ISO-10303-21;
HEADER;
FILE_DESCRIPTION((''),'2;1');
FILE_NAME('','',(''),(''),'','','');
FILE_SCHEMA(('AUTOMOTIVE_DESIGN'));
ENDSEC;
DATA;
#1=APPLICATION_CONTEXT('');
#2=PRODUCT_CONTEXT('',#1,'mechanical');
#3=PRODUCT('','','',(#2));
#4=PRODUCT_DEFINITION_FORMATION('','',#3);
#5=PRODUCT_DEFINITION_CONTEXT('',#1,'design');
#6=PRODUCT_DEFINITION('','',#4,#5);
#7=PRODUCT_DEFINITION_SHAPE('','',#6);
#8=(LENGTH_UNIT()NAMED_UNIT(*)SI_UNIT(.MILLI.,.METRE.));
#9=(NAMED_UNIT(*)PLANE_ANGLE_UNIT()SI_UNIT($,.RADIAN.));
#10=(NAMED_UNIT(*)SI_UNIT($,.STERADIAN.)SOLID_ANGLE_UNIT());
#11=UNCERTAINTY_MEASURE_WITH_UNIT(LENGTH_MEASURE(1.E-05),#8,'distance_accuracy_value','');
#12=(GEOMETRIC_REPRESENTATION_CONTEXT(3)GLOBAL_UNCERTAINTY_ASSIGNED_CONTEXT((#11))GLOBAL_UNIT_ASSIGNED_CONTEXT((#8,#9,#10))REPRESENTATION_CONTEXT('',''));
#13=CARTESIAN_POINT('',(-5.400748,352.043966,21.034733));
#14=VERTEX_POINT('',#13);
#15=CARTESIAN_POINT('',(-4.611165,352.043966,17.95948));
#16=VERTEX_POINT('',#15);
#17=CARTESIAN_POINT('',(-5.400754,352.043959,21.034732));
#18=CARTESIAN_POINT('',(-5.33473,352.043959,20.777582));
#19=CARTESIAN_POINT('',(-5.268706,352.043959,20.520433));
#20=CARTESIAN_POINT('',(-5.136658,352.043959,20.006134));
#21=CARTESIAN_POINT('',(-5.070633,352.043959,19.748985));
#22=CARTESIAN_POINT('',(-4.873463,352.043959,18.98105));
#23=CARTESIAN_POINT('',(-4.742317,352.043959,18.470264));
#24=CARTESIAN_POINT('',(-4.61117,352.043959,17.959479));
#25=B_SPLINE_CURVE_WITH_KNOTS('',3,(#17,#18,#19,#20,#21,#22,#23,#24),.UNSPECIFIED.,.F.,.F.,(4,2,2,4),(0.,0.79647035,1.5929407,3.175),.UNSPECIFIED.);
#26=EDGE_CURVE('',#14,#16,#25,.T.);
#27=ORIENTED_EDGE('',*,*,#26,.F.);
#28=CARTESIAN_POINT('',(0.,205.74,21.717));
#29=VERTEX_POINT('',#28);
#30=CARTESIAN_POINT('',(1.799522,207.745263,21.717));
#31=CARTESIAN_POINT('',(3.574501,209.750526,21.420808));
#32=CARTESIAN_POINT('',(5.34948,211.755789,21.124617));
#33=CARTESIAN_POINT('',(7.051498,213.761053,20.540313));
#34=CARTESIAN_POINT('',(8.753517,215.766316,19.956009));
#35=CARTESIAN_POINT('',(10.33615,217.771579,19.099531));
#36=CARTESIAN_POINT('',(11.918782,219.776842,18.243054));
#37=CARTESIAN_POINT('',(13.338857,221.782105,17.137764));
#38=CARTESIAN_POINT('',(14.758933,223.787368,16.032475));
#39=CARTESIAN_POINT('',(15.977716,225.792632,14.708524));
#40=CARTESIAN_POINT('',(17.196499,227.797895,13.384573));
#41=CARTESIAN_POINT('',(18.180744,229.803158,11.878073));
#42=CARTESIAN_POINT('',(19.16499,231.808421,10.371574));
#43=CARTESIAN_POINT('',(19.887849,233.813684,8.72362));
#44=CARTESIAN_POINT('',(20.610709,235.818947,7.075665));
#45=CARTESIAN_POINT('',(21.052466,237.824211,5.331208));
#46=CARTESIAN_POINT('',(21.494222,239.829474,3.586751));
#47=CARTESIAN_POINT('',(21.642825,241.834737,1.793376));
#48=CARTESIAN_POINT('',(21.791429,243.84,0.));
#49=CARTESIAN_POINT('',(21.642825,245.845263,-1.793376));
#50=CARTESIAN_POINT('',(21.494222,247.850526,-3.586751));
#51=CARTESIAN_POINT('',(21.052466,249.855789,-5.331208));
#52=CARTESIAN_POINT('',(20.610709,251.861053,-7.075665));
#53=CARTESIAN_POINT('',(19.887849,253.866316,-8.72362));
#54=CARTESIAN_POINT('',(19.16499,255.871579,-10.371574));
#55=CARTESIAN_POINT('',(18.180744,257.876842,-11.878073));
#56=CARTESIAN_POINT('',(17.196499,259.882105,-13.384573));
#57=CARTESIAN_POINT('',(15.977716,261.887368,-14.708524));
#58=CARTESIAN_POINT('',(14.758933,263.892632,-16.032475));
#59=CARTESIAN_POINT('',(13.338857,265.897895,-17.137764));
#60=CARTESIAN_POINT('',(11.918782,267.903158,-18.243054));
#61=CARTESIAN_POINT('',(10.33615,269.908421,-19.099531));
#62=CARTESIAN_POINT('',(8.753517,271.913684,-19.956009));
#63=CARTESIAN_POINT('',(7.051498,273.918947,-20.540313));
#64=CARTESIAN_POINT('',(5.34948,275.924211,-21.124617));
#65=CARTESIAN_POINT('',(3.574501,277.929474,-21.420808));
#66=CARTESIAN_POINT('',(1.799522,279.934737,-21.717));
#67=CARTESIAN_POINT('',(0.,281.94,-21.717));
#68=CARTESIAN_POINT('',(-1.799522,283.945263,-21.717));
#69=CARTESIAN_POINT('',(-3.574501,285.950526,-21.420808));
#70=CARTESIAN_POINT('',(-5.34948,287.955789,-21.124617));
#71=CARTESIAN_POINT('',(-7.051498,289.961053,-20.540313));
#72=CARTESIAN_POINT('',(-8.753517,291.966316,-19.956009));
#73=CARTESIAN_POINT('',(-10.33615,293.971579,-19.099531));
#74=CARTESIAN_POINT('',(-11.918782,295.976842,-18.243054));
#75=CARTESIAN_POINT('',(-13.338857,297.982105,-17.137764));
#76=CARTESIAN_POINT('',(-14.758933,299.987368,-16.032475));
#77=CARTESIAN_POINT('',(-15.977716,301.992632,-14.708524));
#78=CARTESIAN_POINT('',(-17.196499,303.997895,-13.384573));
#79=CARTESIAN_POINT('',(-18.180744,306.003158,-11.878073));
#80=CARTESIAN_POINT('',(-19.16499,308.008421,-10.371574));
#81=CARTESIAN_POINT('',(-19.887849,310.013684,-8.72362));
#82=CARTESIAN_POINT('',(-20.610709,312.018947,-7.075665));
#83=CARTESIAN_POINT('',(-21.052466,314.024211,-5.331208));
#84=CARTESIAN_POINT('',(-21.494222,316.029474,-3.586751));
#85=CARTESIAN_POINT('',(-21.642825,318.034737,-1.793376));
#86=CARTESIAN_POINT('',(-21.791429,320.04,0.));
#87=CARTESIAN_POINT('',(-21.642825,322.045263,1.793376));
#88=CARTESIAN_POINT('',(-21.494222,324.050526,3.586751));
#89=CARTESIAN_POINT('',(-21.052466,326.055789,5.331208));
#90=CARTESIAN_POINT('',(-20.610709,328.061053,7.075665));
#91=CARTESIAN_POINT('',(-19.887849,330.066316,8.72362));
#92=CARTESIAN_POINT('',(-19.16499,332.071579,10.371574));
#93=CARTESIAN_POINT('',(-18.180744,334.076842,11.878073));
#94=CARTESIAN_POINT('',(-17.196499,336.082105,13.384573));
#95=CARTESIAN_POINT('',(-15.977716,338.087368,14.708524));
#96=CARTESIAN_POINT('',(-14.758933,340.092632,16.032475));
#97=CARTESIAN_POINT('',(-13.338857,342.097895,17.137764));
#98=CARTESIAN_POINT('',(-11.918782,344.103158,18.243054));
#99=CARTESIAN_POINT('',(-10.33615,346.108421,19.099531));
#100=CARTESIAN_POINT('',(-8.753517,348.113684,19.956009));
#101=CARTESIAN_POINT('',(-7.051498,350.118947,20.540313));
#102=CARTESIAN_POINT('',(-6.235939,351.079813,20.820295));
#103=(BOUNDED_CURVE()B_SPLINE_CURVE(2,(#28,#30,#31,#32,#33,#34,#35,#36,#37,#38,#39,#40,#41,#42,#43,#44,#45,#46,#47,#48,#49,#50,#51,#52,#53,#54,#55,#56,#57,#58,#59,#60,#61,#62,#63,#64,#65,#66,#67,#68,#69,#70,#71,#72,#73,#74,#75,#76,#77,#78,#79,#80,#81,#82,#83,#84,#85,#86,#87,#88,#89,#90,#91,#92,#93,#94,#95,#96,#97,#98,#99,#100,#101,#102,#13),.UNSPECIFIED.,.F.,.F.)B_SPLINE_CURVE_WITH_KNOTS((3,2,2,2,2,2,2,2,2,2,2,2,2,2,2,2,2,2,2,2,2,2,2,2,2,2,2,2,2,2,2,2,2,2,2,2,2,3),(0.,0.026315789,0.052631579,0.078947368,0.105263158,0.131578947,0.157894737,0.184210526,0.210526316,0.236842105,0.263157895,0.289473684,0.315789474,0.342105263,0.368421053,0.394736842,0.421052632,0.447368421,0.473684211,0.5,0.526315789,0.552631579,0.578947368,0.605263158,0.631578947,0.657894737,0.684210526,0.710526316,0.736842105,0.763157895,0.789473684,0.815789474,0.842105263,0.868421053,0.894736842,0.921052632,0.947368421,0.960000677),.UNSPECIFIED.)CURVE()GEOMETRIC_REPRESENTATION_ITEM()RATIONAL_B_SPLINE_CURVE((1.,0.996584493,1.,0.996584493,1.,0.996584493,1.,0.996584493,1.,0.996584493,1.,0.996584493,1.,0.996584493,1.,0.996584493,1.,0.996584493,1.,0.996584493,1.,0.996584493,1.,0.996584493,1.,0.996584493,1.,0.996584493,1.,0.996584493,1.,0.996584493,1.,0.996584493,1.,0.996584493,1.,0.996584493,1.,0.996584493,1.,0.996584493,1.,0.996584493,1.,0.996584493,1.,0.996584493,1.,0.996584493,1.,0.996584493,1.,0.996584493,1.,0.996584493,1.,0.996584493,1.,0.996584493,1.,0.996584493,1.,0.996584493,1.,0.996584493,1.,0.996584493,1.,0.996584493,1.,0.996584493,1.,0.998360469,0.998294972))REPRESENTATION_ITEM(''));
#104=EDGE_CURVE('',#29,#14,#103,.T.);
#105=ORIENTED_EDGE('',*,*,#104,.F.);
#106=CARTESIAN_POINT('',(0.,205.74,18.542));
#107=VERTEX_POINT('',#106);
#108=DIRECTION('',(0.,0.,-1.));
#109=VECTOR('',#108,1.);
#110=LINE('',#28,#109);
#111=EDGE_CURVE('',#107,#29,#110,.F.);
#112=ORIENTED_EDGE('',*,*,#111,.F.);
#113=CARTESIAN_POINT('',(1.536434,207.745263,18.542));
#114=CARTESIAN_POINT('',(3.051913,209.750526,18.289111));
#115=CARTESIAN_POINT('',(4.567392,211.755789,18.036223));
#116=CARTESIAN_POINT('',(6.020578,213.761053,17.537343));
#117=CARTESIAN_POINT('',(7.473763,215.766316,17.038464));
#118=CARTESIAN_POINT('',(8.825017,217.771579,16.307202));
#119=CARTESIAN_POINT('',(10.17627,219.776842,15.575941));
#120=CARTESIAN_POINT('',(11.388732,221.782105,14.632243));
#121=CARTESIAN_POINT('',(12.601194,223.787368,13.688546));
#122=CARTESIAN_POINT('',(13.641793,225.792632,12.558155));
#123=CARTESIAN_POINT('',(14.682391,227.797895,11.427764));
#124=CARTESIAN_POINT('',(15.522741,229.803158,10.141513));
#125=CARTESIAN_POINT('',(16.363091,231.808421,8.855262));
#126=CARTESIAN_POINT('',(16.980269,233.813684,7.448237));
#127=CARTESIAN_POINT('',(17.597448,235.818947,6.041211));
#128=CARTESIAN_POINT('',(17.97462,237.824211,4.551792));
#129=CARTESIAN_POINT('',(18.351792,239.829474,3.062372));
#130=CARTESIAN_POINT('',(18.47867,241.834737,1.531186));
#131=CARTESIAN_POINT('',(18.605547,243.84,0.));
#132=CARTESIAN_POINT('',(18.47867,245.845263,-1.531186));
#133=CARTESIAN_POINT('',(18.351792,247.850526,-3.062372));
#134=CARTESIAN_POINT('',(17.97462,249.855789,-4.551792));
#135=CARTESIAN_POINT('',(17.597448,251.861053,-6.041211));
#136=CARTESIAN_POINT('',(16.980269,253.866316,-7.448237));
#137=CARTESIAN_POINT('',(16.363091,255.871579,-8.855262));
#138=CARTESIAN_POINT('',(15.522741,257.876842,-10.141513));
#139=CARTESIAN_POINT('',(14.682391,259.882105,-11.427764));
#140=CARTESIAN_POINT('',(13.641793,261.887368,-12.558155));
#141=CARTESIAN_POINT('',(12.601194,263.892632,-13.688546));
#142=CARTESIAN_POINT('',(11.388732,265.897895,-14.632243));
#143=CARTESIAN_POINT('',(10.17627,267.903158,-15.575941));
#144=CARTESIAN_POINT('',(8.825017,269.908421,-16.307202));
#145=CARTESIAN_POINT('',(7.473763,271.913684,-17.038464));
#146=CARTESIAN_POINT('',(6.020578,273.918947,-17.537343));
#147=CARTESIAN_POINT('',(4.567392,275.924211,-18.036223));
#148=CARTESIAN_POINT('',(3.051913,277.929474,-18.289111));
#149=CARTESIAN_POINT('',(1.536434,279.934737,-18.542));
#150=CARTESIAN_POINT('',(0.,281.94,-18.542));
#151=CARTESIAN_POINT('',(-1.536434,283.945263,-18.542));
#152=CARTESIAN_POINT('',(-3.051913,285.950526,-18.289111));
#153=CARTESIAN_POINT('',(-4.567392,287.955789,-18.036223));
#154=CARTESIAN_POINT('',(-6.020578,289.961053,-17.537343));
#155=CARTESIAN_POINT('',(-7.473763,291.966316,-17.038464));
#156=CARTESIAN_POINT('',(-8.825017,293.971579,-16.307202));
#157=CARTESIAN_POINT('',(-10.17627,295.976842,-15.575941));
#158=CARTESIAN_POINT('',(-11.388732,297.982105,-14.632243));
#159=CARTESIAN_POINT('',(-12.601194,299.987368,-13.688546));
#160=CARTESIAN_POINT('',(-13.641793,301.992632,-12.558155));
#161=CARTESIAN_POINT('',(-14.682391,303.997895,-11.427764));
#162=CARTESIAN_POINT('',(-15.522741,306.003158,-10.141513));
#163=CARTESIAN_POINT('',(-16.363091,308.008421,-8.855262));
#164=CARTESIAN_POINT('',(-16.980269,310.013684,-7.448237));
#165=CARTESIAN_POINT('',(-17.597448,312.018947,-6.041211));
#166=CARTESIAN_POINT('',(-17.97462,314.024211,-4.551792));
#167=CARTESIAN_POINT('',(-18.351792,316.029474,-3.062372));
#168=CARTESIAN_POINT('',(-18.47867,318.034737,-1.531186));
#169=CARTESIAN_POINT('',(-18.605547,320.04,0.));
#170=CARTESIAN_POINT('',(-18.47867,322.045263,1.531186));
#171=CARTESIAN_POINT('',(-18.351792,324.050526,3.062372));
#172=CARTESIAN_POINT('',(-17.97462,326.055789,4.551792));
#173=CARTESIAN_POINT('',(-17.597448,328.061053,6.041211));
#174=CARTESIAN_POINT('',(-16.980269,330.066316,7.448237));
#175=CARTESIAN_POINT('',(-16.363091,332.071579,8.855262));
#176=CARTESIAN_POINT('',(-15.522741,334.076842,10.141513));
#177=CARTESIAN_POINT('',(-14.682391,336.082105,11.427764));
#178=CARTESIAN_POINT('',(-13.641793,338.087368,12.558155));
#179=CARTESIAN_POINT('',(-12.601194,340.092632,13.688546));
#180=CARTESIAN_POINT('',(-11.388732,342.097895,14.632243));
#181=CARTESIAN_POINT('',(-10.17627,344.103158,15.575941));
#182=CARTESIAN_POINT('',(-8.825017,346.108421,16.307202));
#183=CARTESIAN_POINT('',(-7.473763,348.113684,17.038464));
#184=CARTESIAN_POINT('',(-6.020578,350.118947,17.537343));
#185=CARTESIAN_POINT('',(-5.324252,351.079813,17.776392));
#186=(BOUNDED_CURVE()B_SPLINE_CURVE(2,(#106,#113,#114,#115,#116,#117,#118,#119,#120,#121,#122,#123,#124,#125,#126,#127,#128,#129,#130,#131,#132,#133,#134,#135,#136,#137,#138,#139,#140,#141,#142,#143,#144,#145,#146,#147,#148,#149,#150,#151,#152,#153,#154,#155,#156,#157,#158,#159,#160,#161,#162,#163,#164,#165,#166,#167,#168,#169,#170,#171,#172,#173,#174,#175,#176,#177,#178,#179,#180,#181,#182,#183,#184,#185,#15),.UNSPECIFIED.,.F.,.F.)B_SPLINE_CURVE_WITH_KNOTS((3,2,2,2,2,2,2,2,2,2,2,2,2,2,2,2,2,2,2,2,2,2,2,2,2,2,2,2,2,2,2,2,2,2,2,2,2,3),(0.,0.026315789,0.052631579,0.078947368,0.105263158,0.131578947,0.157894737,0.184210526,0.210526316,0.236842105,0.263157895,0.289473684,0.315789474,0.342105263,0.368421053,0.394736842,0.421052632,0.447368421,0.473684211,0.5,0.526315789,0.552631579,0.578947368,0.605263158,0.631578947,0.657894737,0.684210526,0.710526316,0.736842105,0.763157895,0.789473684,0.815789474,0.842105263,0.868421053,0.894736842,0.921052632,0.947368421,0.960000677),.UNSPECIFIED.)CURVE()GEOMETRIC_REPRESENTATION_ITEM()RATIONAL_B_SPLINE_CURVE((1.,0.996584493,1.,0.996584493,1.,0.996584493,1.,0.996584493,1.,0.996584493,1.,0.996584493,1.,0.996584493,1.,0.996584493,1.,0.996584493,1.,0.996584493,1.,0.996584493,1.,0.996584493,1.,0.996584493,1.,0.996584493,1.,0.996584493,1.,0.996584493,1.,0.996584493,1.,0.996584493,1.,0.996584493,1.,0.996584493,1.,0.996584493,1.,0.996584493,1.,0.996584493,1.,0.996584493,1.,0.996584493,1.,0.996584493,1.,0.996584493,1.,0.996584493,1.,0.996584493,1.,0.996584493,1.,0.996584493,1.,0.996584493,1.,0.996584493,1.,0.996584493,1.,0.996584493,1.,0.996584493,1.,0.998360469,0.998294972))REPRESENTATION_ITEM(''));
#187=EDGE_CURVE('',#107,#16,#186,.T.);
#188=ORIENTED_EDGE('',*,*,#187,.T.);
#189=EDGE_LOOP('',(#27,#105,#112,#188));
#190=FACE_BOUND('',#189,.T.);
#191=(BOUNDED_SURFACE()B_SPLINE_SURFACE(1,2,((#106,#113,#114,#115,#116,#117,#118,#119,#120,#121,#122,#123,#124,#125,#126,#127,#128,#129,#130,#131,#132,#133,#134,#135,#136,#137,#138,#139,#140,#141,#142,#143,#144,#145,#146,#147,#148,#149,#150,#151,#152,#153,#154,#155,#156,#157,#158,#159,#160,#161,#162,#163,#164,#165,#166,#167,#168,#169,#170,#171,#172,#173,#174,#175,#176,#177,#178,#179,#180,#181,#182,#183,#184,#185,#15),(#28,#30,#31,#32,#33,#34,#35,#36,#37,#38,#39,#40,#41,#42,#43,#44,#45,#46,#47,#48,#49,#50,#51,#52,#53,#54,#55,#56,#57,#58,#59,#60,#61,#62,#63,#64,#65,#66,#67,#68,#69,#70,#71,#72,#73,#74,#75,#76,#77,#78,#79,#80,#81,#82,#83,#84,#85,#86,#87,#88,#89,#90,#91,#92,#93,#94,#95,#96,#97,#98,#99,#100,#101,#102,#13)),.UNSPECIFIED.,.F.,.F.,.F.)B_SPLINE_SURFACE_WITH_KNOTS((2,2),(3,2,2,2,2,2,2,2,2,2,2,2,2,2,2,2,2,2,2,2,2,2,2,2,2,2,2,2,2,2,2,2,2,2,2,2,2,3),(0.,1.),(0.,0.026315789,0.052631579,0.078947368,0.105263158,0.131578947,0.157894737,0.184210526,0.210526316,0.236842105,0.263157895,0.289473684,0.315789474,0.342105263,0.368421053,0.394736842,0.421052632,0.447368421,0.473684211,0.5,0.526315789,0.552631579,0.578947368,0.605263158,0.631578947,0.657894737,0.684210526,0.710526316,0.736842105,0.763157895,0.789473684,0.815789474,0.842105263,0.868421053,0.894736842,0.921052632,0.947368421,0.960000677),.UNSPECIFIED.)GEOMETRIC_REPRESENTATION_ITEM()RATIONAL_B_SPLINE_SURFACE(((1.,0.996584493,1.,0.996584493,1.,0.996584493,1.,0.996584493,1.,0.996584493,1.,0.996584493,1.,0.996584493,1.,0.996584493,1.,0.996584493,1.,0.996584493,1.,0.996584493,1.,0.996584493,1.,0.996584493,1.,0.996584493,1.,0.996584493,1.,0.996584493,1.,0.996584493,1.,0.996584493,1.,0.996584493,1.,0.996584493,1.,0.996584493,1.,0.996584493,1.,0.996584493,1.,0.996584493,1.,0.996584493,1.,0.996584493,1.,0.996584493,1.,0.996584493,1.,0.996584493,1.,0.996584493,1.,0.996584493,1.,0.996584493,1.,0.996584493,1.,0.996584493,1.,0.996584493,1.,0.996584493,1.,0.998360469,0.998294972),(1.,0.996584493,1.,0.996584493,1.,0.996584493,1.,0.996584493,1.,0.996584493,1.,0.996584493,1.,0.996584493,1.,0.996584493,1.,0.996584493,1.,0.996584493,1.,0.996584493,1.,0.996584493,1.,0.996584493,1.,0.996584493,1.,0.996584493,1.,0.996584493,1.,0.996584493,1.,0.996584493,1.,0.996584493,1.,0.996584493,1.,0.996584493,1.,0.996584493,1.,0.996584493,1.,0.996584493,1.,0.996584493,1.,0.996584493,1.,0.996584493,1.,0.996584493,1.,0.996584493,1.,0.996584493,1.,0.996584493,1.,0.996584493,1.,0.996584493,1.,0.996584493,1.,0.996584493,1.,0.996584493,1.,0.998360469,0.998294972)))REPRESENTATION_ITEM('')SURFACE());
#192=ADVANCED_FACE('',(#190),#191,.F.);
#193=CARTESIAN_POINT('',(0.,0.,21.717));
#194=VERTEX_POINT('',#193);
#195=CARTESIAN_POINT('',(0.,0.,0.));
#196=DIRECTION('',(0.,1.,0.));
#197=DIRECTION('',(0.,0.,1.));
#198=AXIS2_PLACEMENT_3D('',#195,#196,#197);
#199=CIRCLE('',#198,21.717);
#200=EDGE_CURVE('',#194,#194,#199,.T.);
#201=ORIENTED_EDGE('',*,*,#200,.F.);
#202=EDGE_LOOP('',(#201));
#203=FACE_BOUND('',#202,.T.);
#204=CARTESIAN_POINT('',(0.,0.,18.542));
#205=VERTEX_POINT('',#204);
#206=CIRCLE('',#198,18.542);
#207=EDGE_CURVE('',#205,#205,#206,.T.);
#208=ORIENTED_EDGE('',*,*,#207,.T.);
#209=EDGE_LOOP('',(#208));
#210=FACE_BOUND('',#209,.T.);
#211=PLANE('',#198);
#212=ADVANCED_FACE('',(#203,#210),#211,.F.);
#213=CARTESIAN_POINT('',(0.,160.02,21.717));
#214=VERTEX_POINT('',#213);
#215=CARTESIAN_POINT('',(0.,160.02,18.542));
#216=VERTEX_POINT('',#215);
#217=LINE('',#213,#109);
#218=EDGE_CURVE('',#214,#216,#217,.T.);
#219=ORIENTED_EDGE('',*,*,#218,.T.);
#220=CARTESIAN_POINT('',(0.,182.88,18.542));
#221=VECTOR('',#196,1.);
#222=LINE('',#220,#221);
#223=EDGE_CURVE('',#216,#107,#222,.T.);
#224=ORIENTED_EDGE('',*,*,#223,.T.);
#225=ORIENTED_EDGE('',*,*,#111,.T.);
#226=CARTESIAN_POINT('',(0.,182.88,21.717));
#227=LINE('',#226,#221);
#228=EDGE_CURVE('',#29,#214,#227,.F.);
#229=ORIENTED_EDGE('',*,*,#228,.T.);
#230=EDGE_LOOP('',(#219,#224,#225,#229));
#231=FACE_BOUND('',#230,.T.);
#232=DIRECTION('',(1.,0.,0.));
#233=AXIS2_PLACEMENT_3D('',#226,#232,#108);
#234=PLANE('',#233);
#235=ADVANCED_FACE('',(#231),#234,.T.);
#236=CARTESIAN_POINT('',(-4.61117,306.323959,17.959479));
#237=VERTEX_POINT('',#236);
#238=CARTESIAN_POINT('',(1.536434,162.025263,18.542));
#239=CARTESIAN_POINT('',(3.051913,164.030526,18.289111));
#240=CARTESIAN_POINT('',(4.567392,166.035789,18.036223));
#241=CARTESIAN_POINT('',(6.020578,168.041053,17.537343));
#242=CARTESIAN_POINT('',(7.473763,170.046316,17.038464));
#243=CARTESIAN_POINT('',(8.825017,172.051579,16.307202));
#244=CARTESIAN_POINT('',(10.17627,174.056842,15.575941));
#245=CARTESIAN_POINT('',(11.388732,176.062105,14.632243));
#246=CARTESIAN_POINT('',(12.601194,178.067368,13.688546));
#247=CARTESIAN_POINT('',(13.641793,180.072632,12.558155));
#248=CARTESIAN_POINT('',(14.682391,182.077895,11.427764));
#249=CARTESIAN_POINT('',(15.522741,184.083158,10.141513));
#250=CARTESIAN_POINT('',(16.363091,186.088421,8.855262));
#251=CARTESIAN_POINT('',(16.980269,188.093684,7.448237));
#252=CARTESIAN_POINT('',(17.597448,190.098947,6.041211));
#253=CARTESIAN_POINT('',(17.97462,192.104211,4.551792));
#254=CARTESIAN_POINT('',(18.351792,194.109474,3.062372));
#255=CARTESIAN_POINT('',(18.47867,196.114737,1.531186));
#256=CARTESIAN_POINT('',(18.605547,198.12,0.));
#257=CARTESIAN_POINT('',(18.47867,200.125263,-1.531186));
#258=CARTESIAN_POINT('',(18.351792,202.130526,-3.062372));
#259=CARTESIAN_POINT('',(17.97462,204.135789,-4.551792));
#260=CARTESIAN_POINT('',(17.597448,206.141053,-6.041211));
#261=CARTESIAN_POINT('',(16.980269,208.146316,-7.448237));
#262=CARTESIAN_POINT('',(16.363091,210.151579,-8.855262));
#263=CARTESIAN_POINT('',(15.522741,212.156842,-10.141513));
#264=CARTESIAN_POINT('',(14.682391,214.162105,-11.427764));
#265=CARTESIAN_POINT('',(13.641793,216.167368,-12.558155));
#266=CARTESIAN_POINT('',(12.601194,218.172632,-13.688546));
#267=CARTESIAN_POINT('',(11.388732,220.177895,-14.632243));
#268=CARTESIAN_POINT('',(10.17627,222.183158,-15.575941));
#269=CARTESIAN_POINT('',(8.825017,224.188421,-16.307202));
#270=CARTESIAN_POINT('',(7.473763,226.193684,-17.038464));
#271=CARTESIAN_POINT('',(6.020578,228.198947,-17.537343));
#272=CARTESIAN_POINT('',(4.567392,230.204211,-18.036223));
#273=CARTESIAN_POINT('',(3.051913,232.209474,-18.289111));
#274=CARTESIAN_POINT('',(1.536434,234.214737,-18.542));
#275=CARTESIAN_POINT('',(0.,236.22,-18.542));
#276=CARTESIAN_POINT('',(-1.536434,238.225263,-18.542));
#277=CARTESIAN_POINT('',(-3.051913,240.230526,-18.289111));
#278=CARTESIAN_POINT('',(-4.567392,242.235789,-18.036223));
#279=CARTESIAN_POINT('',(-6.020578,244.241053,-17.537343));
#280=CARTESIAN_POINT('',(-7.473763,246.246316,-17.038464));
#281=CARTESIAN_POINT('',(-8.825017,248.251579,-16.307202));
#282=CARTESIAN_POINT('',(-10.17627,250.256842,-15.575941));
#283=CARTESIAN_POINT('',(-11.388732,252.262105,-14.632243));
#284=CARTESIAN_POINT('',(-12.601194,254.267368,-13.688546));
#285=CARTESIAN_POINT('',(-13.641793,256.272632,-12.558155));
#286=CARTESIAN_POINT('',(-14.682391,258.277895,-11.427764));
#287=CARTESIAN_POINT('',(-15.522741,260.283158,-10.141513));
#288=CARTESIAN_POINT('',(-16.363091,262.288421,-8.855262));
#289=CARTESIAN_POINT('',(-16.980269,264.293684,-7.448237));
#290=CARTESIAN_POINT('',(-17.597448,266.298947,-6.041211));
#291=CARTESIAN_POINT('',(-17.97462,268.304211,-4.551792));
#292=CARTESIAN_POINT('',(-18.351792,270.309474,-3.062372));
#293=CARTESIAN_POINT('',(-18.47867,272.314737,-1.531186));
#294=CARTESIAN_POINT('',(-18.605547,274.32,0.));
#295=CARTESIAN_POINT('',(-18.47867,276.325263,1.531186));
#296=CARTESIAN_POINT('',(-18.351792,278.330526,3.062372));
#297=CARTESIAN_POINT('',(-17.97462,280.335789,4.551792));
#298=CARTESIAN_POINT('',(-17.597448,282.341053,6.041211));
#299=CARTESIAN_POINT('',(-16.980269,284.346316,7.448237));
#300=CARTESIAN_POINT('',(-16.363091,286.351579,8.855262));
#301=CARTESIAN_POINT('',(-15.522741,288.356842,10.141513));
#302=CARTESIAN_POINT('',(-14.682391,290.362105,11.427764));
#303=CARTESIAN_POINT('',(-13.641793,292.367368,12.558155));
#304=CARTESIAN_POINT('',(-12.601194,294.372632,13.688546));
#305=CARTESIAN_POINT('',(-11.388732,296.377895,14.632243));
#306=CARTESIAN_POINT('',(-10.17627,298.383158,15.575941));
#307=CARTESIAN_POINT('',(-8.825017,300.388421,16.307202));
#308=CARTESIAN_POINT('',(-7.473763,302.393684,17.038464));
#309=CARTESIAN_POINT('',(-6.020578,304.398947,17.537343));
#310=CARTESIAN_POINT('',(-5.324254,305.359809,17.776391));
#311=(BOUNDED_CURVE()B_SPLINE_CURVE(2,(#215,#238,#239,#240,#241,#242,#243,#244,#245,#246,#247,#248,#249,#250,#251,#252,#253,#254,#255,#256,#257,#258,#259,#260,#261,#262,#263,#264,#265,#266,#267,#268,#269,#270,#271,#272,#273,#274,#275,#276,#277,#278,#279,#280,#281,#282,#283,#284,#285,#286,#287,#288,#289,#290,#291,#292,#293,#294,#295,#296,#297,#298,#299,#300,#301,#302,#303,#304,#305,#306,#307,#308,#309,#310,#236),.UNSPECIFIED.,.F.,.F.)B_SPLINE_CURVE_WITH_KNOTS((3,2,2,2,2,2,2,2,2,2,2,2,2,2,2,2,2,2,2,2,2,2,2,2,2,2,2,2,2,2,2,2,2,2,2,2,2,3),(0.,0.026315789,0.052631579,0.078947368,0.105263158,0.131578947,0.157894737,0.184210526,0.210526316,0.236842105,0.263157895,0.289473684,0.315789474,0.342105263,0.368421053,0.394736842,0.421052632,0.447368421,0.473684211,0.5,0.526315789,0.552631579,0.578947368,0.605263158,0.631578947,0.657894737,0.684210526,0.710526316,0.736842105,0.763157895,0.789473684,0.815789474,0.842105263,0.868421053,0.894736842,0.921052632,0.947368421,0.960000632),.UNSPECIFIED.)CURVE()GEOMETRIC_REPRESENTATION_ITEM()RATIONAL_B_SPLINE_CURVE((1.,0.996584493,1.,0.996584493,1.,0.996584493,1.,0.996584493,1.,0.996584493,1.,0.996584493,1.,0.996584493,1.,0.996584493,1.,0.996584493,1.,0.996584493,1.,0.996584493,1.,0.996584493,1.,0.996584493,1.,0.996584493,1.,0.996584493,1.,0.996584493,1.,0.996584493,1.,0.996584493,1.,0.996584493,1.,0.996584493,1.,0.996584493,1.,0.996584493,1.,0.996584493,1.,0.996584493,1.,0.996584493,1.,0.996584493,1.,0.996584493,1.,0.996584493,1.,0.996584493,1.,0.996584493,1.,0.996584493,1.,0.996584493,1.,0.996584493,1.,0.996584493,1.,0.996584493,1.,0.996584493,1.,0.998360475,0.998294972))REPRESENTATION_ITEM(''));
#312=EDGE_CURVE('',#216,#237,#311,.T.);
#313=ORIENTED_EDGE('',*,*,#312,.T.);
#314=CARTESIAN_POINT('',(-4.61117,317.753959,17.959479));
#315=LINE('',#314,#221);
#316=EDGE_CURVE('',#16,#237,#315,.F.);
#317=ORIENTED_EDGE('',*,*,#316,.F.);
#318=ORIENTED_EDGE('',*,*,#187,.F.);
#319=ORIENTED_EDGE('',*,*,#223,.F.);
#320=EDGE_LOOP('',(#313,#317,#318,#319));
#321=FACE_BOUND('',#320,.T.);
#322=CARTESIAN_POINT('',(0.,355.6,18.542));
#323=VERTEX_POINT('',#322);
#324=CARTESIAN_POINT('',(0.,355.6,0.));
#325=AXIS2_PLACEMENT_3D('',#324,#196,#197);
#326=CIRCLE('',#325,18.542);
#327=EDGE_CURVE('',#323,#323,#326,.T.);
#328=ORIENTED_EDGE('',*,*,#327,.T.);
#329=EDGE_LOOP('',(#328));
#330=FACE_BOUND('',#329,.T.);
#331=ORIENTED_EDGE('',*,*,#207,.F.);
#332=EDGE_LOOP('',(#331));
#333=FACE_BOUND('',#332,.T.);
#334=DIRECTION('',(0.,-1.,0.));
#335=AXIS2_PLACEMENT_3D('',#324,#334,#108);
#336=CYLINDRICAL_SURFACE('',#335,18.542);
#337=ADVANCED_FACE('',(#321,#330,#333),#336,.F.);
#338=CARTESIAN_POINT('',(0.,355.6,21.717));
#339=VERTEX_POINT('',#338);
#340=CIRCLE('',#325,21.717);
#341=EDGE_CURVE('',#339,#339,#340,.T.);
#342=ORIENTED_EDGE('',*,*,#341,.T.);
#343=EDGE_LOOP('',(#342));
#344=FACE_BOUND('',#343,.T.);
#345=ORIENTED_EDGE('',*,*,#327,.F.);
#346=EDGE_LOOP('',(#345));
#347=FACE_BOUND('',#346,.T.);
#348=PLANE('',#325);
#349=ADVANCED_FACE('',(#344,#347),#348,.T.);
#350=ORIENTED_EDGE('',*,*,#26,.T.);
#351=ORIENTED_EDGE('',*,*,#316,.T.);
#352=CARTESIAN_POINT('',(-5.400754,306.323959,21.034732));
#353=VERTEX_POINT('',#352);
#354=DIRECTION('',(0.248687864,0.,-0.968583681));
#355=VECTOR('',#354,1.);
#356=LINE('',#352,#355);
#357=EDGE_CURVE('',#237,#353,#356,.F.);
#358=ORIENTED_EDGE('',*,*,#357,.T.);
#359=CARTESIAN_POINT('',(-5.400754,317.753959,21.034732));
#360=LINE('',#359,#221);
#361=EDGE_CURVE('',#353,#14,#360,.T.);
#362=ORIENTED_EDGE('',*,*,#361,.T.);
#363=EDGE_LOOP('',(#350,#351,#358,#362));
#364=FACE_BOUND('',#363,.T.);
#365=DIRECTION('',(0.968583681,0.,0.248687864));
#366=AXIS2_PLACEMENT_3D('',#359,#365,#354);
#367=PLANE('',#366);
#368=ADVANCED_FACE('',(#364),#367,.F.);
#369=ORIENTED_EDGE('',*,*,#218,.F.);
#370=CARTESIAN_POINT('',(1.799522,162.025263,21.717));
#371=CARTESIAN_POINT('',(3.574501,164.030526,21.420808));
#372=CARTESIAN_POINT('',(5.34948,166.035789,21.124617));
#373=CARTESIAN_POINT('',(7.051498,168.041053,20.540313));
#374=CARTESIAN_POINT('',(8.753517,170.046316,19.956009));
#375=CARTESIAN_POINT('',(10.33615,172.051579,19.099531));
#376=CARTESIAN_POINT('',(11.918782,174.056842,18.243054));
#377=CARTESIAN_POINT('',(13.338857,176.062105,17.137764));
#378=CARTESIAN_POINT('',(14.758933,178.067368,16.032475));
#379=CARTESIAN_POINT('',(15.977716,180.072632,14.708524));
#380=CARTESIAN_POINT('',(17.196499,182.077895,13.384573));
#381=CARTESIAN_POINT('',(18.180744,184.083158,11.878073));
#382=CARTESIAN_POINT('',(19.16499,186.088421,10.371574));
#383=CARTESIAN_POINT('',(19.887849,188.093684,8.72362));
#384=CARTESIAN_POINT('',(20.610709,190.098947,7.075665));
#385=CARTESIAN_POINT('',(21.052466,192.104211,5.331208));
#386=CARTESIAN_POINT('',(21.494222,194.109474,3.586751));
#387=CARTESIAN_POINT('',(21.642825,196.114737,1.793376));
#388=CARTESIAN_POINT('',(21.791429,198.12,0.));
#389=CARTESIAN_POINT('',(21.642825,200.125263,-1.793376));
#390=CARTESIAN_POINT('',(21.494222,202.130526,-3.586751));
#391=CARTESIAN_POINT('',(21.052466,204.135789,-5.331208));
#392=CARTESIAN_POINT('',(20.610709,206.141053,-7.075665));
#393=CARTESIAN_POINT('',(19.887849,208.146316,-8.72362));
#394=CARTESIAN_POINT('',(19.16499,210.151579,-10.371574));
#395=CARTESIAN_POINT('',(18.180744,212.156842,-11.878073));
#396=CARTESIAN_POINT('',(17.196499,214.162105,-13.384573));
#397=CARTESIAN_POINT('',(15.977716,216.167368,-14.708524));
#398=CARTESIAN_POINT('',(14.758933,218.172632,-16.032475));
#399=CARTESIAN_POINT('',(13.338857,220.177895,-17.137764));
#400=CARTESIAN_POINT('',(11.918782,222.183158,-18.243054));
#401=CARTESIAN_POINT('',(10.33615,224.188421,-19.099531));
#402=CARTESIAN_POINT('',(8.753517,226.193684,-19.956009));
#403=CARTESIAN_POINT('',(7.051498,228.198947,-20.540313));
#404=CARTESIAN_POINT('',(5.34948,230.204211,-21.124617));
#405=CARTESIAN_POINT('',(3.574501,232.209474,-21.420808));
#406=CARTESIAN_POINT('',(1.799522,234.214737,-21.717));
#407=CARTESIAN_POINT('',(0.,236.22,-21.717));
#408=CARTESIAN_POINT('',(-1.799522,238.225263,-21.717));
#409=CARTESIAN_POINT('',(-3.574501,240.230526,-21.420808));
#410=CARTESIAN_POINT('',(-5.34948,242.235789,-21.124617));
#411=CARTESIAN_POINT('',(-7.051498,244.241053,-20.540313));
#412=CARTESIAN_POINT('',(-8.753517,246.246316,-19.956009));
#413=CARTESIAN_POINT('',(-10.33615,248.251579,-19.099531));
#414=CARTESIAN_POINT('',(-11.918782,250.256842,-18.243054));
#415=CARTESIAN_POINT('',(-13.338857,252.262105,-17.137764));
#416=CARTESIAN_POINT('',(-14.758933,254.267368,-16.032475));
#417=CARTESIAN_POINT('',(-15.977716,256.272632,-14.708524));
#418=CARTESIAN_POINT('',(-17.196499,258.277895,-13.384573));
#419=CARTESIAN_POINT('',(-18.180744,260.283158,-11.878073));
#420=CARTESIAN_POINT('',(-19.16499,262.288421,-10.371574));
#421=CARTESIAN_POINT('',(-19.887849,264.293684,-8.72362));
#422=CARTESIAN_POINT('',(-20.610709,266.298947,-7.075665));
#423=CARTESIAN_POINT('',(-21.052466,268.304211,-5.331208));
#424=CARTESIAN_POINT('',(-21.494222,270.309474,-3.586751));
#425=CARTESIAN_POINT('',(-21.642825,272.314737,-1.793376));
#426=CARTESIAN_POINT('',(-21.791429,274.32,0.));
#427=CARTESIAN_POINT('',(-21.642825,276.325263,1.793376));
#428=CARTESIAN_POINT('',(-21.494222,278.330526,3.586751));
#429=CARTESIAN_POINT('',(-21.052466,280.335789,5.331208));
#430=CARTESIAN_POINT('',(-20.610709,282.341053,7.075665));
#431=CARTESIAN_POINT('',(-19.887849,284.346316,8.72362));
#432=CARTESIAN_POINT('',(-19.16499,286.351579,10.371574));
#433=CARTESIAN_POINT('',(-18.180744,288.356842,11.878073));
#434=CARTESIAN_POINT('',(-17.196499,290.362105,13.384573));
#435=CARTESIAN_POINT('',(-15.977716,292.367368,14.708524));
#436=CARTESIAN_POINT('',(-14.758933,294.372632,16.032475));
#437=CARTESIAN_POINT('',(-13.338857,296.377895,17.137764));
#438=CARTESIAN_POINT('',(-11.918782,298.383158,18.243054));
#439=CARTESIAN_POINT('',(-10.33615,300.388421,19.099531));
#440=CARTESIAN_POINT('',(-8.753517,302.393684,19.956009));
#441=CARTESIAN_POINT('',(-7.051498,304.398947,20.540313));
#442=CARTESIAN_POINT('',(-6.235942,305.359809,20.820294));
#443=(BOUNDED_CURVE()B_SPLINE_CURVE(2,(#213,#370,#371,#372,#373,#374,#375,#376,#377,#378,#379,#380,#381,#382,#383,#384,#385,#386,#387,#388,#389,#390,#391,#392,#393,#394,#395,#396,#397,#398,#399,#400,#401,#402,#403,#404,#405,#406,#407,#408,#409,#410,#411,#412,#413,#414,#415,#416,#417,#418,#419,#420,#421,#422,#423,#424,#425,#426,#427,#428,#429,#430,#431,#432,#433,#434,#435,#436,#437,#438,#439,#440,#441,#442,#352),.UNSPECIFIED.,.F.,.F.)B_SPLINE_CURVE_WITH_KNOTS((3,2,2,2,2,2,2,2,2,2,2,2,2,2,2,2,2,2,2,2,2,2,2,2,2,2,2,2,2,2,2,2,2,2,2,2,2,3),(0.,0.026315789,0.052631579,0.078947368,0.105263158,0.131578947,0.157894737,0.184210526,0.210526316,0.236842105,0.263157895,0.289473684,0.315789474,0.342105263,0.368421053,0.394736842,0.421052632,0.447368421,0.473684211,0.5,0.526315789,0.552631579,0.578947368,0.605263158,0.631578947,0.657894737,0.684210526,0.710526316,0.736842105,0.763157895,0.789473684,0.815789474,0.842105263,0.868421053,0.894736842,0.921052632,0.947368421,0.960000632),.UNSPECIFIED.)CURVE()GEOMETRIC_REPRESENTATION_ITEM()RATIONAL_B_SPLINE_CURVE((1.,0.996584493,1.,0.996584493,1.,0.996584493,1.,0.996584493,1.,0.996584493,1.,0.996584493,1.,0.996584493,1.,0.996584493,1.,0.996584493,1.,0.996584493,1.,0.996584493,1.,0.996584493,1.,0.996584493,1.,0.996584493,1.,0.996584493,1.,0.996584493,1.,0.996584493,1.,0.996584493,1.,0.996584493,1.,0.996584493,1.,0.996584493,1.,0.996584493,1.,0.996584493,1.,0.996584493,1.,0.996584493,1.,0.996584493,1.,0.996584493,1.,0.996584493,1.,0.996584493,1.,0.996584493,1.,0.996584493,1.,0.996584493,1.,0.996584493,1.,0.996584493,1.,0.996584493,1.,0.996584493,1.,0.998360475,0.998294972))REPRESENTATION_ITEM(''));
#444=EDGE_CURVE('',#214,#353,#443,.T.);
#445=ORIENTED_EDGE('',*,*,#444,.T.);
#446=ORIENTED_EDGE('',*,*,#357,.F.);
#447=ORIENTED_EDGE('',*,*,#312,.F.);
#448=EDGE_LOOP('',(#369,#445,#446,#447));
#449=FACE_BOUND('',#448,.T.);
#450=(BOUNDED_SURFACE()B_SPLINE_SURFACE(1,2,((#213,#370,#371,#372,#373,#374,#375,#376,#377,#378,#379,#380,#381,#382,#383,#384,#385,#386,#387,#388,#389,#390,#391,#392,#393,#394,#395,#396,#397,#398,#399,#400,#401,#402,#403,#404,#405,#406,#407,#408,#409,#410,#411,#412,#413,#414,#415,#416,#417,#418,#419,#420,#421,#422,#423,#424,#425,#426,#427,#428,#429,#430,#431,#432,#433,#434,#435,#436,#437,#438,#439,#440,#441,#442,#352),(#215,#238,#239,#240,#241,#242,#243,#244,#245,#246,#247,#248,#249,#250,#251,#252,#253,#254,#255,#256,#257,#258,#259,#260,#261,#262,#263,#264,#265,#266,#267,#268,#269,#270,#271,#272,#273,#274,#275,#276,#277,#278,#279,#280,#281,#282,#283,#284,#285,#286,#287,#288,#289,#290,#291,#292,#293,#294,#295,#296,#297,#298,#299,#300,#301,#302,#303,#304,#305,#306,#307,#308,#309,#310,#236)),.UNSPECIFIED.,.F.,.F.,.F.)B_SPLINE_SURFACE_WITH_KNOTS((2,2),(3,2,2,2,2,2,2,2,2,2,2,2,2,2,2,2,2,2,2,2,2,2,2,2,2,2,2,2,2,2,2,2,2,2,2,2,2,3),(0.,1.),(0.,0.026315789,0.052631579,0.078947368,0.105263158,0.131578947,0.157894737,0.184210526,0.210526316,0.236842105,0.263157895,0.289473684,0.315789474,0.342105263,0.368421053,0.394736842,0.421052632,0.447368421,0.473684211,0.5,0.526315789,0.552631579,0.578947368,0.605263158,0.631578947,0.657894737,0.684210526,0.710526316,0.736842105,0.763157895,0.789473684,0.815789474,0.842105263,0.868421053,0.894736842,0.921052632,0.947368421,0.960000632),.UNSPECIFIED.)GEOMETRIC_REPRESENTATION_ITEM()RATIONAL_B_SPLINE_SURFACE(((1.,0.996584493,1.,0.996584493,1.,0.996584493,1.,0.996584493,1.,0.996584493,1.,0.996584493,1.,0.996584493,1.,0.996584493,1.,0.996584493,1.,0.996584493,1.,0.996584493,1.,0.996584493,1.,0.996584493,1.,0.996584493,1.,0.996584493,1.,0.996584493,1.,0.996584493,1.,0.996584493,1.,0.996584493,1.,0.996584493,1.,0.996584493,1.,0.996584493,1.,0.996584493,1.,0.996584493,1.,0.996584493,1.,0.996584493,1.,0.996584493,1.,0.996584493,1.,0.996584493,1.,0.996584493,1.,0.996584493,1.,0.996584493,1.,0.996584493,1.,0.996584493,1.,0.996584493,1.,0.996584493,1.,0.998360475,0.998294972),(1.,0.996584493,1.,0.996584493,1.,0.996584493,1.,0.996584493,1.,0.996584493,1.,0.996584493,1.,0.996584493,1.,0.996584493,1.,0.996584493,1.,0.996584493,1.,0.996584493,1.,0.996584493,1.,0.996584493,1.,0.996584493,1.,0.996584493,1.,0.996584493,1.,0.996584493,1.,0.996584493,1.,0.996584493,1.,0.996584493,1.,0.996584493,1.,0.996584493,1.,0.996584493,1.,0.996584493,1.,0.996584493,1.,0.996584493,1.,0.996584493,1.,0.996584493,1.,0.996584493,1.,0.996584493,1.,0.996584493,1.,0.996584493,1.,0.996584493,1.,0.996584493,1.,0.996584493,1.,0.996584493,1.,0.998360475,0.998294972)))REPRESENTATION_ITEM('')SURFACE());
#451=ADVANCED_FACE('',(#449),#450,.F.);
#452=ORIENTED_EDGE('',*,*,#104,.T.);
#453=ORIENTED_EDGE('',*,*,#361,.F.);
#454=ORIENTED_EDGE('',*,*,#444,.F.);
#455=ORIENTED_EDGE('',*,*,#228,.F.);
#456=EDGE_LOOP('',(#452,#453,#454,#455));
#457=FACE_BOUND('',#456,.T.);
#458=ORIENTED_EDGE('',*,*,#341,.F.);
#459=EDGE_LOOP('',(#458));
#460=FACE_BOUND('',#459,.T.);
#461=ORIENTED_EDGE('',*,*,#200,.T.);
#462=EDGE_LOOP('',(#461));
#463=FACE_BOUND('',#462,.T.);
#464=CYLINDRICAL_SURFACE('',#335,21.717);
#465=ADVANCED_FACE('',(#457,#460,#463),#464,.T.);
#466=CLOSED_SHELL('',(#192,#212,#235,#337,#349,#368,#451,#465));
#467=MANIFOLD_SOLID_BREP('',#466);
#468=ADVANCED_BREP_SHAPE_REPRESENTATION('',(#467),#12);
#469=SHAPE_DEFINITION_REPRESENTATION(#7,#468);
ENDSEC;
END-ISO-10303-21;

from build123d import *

# Parameters (mm, degrees)
SKETCH1_R           = 21.717
SKETCH1_R_2         = 18.542
BOSS_EXTRUDE1_DEPTH = 355.6
CUT_SWEEP1_PITCH    = 152.4


with BuildPart() as part:
    # Sketch1 → Boss-Extrude1 (new body)
    with BuildSketch(Plane(origin=(0, 0, 0), x_dir=(1, 0, 0), z_dir=(0, 1, 0))):
        with Locations(Location((0, 0, 0), (0, 0, 270))):
            Circle(SKETCH1_R)
        with Locations(Location((0, 0, 0), (0, 0, 270))):
            Circle(SKETCH1_R_2, mode=Mode.SUBTRACT)
    extrude(amount=BOSS_EXTRUDE1_DEPTH)

    # Cut-Sweep1: the profile of Sketch6 profile screwed along a right-hand helix of 0.96 turns, 38 arcs to a turn; built about Z, then put on its axis
    cut_sweep1_z = Axis((0, 0, 0), (0, 0, 1))
    cut_sweep1_corners = [(18.542, 0, -22.86), (21.7173, 0, -22.86), (21.7173, 0, 22.86), (18.542, 0, 22.86)]
    with BuildLine(mode=Mode.PRIVATE) as cut_sweep1_profile:
        Line(cut_sweep1_corners[0], cut_sweep1_corners[1])
        Line(cut_sweep1_corners[1], cut_sweep1_corners[2])
        Line(cut_sweep1_corners[2], cut_sweep1_corners[3])
        Line(cut_sweep1_corners[3], cut_sweep1_corners[0])
    cut_sweep1_cap = Face(cut_sweep1_profile.wire())
    cut_sweep1_turn_angles = [0, 4.736842105, 9.473684211, 14.210526316, 18.947368421, 23.684210526, 28.421052632, 33.157894737, 37.894736842, 42.631578947, 47.368421053, 52.105263158, 56.842105263, 61.578947368, 66.315789474, 71.052631579, 75.789473684, 80.526315789, 85.263157895, 90, 94.736842105, 99.473684211, 104.210526316, 108.947368421, 113.684210526, 118.421052632, 123.157894737, 127.894736842, 132.631578947, 137.368421053, 142.105263158, 146.842105263, 151.578947368, 156.315789474, 161.052631579, 165.789473684, 170.526315789, 175.263157895, 180, 184.736842105, 189.473684211, 194.210526316, 198.947368421, 203.684210526, 208.421052632, 213.157894737, 217.894736842, 222.631578947, 227.368421053, 232.105263158, 236.842105263, 241.578947368, 246.315789474, 251.052631579, 255.789473684, 260.526315789, 265.263157895, 270, 274.736842105, 279.473684211, 284.210526316, 288.947368421, 293.684210526, 298.421052632, 303.157894737, 307.894736842, 312.631578947, 317.368421053, 322.105263158, 326.842105263, 331.578947368, 336.315789474, 341.052631579, 343.326315789, 345.6]
    cut_sweep1_turn_weights = [1, 0.9965844930066698, 1, 0.9965844930066698, 1, 0.9965844930066698, 1, 0.9965844930066698, 1, 0.9965844930066698, 1, 0.9965844930066698, 1, 0.9965844930066698, 1, 0.9965844930066698, 1, 0.9965844930066698, 1, 0.9965844930066698, 1, 0.9965844930066698, 1, 0.9965844930066698, 1, 0.9965844930066698, 1, 0.9965844930066698, 1, 0.9965844930066698, 1, 0.9965844930066698, 1, 0.9965844930066698, 1, 0.9965844930066698, 1, 0.9965844930066698, 1, 0.9965844930066698, 1, 0.9965844930066698, 1, 0.9965844930066698, 1, 0.9965844930066698, 1, 0.9965844930066698, 1, 0.9965844930066698, 1, 0.9965844930066698, 1, 0.9965844930066698, 1, 0.9965844930066698, 1, 0.9965844930066698, 1, 0.9965844930066698, 1, 0.9965844930066698, 1, 0.9965844930066698, 1, 0.9965844930066698, 1, 0.9965844930066698, 1, 0.9965844930066698, 1, 0.9965844930066698, 1, 0.9992127221406268, 1]
    cut_sweep1_turn_rails = [Edge.make_bspline([Vector(p[0], p[1], 0).rotate(cut_sweep1_z, cut_sweep1_turn_angles[k]) / cut_sweep1_turn_weights[k] + Vector(0, 0, p[2] + CUT_SWEEP1_PITCH * cut_sweep1_turn_angles[k] / 360) for k in range(75)], [0, 0, 0, 1, 1, 2, 2, 3, 3, 4, 4, 5, 5, 6, 6, 7, 7, 8, 8, 9, 9, 10, 10, 11, 11, 12, 12, 13, 13, 14, 14, 15, 15, 16, 16, 17, 17, 18, 18, 19, 19, 20, 20, 21, 21, 22, 22, 23, 23, 24, 24, 25, 25, 26, 26, 27, 27, 28, 28, 29, 29, 30, 30, 31, 31, 32, 32, 33, 33, 34, 34, 35, 35, 36, 36, 37, 37, 37], 2, cut_sweep1_turn_weights) for p in cut_sweep1_corners]
    cut_sweep1_turn_sides = [Face.make_surface_from_curves(cut_sweep1_turn_rails[p[0]], cut_sweep1_turn_rails[p[1]]) for p in [(0, 1), (1, 2), (2, 3), (3, 0)]]
    cut_sweep1 = Plane(origin=(0, 182.88, 0), x_dir=(0, 0, 1), z_dir=(0, 1, 0)) * Solid(Shell([*cut_sweep1_turn_sides, cut_sweep1_cap, cut_sweep1_cap.rotate(cut_sweep1_z, 345.6).moved(Location((0, 0, CUT_SWEEP1_PITCH * 345.6 / 360)))]))
    add(cut_sweep1, mode=Mode.SUBTRACT)


solid = part.part
